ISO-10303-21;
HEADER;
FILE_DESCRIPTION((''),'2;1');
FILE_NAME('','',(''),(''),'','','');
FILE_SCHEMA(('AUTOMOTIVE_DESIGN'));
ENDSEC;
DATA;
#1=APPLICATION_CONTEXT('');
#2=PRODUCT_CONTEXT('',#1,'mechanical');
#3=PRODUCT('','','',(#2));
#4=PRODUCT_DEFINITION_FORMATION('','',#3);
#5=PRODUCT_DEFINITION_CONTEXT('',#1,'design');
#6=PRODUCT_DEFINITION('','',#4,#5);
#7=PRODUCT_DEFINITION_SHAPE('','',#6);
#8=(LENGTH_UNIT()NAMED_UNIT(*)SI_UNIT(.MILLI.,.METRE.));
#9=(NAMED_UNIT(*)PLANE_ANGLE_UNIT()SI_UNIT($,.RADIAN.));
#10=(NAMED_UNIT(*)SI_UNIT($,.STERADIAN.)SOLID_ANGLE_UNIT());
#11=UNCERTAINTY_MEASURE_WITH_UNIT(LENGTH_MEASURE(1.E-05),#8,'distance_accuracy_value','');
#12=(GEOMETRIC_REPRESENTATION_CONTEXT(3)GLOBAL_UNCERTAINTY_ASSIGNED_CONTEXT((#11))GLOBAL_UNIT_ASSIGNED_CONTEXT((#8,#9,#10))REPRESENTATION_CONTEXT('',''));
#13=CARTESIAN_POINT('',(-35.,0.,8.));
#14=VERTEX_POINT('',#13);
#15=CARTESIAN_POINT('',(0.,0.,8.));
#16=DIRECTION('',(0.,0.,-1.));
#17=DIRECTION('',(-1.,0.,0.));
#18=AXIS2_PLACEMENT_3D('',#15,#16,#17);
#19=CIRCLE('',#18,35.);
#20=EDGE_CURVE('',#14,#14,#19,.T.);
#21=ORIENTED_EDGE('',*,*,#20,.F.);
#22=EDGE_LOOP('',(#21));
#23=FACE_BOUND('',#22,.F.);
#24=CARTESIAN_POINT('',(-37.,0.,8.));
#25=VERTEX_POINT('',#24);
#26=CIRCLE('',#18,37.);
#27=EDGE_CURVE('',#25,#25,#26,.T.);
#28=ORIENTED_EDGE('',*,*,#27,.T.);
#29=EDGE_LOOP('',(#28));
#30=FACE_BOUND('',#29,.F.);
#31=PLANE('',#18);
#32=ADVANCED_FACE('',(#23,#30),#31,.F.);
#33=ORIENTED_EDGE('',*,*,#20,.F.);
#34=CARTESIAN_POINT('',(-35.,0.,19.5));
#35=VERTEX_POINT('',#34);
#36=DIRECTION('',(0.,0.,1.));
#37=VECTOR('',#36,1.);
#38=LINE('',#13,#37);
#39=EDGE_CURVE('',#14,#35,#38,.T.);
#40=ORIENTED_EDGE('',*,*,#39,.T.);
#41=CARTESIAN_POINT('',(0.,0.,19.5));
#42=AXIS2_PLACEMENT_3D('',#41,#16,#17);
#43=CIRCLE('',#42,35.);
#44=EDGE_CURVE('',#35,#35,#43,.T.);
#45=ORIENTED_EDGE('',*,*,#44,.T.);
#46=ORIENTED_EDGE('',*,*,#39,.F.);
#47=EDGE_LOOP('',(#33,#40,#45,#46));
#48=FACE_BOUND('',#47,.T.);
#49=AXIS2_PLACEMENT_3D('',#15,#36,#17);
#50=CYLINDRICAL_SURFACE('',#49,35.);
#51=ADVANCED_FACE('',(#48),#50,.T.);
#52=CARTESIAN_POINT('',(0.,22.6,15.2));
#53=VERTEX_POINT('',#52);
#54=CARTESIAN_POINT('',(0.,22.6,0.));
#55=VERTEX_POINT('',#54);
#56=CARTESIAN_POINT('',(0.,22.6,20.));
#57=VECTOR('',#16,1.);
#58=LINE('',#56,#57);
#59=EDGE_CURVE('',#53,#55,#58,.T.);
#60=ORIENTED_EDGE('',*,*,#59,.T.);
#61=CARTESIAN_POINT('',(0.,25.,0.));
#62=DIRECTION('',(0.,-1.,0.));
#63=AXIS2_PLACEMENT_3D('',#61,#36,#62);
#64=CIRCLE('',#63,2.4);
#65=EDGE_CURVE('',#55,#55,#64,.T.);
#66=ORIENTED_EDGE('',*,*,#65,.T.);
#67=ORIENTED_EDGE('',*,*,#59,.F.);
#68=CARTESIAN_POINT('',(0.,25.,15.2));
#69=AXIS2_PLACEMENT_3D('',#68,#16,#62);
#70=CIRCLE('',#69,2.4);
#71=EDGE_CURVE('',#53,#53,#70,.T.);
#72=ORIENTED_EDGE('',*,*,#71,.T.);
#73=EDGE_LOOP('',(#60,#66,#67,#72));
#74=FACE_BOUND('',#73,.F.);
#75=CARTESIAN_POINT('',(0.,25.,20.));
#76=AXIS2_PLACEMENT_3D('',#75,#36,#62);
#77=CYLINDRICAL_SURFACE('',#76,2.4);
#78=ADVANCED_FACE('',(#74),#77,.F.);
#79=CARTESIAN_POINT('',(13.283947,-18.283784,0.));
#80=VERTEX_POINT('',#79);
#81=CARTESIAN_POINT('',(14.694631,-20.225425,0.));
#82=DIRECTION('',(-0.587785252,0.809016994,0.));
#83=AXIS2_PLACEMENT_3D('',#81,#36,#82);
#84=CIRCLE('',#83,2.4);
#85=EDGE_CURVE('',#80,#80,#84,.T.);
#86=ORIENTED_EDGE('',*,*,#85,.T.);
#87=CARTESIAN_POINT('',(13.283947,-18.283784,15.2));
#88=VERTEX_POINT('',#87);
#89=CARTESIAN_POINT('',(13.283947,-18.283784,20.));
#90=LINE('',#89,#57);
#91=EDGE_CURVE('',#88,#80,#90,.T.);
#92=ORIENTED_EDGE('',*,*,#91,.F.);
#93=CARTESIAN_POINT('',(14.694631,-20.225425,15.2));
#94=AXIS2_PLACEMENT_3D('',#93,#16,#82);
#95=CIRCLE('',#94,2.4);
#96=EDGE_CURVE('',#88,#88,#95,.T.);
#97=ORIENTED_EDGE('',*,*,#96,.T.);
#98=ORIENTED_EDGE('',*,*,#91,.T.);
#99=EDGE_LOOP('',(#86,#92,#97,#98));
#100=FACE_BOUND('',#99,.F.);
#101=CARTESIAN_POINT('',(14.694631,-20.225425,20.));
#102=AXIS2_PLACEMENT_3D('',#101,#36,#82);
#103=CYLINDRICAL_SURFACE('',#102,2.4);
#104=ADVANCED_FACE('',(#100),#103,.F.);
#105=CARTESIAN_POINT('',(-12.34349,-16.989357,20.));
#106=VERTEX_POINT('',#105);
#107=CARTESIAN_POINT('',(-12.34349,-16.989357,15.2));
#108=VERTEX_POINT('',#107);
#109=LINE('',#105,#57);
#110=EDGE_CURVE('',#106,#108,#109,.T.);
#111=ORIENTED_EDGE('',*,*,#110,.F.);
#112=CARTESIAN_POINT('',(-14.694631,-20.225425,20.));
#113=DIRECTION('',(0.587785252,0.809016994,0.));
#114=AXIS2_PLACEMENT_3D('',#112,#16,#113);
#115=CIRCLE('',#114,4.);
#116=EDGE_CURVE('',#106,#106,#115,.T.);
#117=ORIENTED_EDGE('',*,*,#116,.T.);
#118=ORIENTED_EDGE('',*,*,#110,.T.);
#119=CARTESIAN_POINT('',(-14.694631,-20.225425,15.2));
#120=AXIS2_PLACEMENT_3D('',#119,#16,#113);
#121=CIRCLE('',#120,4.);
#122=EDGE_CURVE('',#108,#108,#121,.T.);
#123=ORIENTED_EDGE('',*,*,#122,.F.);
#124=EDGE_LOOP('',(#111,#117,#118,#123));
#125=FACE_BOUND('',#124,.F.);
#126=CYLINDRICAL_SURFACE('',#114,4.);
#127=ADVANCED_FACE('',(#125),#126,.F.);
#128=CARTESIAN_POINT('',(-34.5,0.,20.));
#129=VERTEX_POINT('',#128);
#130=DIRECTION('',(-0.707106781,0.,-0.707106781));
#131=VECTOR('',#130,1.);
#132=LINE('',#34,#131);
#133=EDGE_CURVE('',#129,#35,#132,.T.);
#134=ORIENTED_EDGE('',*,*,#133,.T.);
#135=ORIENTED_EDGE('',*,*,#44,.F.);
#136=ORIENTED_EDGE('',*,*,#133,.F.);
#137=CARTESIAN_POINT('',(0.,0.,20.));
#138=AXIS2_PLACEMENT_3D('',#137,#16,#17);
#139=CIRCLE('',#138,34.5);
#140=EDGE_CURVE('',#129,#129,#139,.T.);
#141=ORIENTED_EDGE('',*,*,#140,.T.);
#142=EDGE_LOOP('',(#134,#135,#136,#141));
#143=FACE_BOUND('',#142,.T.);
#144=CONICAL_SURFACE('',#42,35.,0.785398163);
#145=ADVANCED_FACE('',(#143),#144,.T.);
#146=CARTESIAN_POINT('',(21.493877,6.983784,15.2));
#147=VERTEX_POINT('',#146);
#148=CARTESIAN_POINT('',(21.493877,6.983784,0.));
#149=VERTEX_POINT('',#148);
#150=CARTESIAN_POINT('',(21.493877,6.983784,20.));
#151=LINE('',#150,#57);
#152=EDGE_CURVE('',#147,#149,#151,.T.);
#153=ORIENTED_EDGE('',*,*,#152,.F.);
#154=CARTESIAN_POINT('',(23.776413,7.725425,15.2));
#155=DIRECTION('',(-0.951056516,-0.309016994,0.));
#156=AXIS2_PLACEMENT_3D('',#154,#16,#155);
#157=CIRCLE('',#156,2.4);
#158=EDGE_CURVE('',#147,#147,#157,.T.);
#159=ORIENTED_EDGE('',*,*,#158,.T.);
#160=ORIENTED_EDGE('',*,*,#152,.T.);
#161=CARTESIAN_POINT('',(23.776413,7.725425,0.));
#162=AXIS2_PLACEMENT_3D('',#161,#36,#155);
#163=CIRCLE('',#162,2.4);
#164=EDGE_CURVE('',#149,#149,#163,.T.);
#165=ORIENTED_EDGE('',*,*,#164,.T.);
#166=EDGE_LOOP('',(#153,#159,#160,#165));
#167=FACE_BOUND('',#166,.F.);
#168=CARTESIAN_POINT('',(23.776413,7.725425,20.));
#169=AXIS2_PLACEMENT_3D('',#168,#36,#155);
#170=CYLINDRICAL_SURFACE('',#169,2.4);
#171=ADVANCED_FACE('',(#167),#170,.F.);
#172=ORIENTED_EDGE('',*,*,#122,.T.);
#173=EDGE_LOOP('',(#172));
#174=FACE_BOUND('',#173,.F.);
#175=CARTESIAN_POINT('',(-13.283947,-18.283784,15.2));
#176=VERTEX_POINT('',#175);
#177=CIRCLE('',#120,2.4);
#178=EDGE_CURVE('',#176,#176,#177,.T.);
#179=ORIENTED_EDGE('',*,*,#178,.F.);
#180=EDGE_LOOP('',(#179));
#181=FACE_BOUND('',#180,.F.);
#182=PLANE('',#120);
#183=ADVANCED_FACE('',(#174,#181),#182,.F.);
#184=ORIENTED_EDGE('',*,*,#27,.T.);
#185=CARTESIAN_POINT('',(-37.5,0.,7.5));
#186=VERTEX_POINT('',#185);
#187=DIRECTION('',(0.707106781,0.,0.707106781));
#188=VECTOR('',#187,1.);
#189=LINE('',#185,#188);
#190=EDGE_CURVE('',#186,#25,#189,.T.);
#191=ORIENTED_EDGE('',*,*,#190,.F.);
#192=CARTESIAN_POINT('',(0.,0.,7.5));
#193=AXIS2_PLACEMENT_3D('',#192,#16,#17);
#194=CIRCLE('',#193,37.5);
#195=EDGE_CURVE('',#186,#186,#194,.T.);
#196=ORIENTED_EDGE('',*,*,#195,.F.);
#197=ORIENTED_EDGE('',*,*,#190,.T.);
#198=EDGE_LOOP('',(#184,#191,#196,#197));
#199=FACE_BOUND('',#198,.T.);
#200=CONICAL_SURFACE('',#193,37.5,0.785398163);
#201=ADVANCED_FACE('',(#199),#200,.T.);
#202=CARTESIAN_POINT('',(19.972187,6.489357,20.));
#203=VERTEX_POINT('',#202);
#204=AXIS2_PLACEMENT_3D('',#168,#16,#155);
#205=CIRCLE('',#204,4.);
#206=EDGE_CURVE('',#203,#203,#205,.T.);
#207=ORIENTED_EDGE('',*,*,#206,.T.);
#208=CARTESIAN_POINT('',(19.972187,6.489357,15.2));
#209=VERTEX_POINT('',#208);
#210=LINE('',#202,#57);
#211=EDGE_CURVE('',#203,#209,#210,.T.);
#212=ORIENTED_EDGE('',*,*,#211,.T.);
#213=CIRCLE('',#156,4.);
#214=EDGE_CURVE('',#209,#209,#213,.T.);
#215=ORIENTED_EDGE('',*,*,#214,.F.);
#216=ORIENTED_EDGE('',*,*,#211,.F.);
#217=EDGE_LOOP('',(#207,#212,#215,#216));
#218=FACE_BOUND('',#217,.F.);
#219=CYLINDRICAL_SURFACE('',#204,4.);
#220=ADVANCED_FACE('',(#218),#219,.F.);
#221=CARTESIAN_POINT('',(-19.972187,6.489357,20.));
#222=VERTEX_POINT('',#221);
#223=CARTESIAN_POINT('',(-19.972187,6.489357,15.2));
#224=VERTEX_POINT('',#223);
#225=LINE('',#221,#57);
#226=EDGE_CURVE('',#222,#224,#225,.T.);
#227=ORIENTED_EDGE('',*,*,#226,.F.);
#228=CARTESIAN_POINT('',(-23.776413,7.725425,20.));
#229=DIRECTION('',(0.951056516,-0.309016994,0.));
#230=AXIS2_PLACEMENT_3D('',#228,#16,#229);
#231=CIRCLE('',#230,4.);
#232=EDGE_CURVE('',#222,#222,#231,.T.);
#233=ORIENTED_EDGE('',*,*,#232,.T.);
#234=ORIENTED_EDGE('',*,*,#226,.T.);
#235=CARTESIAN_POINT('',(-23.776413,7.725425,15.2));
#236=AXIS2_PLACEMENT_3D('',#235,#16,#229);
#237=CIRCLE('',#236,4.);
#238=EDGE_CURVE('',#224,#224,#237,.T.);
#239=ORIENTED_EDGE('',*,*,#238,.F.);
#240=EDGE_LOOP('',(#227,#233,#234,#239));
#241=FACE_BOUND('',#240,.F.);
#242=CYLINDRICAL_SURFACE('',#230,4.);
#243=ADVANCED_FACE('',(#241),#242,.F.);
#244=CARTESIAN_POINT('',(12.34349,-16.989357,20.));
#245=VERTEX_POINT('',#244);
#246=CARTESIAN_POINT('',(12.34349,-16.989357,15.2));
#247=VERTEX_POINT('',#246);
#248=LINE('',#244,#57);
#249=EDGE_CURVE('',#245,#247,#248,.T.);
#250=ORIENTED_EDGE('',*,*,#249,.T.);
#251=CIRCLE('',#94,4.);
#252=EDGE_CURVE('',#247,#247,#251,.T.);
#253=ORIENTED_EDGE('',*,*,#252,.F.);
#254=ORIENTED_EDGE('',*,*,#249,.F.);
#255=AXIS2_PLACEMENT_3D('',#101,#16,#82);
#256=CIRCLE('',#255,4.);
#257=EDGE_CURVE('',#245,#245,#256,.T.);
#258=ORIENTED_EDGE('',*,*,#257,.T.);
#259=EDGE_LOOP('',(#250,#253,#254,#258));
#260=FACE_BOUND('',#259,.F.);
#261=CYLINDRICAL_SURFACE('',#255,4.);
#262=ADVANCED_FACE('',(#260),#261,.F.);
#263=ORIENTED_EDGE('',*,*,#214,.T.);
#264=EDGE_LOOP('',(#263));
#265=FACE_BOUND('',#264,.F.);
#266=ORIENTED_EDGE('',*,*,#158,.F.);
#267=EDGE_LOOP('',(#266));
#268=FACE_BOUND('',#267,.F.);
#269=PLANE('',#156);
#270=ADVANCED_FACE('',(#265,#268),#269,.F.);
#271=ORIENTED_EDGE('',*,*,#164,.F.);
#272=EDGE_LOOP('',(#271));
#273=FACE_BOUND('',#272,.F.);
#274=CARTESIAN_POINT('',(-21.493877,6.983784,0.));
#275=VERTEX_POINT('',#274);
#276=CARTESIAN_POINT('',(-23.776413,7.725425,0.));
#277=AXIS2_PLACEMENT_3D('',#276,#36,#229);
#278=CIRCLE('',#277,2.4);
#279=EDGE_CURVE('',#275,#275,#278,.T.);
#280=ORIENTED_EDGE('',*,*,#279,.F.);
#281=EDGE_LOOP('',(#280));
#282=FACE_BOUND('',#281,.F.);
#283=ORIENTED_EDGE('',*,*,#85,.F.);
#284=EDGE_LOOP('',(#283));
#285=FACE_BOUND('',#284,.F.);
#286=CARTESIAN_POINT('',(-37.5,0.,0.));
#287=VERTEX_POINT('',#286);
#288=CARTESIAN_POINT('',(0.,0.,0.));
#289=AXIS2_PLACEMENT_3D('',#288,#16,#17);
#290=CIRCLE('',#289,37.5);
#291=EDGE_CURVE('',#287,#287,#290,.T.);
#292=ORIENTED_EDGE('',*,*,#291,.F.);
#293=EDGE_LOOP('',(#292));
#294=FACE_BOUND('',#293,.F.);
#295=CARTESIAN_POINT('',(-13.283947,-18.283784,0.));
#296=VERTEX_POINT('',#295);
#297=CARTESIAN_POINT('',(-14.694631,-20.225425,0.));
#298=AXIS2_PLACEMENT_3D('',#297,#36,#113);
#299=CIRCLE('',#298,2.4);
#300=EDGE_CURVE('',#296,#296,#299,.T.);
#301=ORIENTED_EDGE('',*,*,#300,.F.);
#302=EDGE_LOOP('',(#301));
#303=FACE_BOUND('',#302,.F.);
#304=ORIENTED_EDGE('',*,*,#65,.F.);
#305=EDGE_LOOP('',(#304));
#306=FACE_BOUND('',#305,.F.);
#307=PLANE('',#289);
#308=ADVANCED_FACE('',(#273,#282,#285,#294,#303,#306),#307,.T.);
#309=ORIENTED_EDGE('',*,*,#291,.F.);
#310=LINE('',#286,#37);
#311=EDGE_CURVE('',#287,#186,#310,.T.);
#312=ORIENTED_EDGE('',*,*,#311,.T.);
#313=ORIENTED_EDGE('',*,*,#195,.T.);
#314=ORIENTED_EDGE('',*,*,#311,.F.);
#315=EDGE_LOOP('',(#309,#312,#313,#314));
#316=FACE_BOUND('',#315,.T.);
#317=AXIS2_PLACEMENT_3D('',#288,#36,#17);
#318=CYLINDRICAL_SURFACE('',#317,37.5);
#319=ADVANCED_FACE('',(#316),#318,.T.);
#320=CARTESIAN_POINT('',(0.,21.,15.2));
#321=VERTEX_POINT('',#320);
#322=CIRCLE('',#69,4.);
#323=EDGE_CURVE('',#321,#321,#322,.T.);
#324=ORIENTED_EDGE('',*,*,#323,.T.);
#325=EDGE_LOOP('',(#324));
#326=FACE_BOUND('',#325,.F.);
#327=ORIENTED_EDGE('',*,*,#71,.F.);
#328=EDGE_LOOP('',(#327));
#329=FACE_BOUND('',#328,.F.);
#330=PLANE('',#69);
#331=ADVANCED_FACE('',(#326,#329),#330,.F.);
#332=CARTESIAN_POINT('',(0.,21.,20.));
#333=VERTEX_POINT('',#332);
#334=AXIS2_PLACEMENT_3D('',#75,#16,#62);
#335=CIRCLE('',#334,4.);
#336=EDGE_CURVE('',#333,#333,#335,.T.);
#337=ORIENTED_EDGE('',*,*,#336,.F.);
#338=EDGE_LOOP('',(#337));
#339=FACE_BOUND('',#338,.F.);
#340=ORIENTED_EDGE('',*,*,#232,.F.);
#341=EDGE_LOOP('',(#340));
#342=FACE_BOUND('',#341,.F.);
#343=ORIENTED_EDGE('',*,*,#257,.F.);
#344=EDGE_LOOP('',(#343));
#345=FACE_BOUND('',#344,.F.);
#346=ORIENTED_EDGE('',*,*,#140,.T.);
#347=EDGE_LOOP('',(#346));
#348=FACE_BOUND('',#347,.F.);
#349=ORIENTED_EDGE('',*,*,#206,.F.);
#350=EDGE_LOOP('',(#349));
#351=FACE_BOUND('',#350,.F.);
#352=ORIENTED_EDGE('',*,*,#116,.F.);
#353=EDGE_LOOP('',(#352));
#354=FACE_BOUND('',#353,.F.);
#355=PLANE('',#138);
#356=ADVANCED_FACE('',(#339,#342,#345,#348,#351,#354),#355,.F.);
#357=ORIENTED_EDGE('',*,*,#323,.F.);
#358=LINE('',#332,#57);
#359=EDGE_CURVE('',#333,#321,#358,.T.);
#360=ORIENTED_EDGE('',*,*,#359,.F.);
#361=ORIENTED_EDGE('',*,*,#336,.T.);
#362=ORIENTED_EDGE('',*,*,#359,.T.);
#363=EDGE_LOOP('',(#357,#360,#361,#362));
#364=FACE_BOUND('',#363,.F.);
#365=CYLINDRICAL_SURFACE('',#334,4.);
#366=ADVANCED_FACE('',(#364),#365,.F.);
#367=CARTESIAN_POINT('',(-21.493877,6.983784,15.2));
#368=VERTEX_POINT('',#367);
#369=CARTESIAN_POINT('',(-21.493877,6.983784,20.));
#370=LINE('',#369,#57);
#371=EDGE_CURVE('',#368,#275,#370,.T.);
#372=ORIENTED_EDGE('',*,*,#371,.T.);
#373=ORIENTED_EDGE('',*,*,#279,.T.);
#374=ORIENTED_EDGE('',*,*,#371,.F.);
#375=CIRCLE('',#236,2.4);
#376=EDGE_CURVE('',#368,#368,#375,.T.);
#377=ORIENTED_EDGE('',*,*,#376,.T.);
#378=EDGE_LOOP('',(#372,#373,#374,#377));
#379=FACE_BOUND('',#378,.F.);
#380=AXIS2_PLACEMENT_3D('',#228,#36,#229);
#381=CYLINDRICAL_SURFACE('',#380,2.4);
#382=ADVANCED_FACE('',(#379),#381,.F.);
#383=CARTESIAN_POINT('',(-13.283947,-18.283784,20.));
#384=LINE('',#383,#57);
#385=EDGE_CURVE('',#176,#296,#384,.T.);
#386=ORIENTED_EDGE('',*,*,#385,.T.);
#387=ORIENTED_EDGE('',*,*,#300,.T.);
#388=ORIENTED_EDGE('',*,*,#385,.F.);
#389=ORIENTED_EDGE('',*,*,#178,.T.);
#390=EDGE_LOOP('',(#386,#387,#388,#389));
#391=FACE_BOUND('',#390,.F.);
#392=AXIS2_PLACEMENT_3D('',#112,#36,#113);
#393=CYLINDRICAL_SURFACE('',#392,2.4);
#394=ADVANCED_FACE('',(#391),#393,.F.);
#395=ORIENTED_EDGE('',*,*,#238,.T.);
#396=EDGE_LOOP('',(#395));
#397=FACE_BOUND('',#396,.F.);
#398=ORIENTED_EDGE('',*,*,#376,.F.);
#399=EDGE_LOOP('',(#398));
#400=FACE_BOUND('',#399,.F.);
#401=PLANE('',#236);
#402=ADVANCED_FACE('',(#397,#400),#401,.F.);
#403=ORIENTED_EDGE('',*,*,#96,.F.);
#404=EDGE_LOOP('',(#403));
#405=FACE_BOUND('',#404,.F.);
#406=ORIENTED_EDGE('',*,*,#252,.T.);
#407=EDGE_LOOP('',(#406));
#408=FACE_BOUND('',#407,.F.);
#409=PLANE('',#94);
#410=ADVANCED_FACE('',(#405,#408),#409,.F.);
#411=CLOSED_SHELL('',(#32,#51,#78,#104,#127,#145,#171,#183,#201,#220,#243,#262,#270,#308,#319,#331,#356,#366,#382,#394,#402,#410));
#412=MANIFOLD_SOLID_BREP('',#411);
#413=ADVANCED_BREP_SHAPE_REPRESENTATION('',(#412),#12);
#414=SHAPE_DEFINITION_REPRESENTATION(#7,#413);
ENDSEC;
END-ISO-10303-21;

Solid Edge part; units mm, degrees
sketch "Sketch1" plane through (0, 0, 0) normal (0, -1, 0) x (1, 0, 0)
  line L0 (-37.5, 0) -> (-37.5, 8)
  line L1 (-37.5, 8) -> (-35, 8)
  line L2 (-35, 8) -> (-35, 20)
  line L3 (-35, 20) -> (0, 20)
  line L4 (0, 0) -> (-37.5, 0)
  dimension "D1" = 20
  dimension "D2" = 8
revolve "RevolvedProtrusion1" add sketch "Sketch1" angle 360 about axis through (0, 0, 40) along (0, 0, -1)
chamfer "Chamfer1" distance 0.5 angle 45 2 edges at (35, 0, 20) (37.5, 0, 8)
hole "Hole_1" at (0, 25, 20) direction (0, 0, -1) diameter 4.8 end up to next counterbore diameter 8 counterbore depth 4.8
pattern_circular "Pattern1" count 5 over 360 about axis through (0, 0, 20) along (0, 0, 1) of "Hole_1"
properties material "Polyethylene, low density"
